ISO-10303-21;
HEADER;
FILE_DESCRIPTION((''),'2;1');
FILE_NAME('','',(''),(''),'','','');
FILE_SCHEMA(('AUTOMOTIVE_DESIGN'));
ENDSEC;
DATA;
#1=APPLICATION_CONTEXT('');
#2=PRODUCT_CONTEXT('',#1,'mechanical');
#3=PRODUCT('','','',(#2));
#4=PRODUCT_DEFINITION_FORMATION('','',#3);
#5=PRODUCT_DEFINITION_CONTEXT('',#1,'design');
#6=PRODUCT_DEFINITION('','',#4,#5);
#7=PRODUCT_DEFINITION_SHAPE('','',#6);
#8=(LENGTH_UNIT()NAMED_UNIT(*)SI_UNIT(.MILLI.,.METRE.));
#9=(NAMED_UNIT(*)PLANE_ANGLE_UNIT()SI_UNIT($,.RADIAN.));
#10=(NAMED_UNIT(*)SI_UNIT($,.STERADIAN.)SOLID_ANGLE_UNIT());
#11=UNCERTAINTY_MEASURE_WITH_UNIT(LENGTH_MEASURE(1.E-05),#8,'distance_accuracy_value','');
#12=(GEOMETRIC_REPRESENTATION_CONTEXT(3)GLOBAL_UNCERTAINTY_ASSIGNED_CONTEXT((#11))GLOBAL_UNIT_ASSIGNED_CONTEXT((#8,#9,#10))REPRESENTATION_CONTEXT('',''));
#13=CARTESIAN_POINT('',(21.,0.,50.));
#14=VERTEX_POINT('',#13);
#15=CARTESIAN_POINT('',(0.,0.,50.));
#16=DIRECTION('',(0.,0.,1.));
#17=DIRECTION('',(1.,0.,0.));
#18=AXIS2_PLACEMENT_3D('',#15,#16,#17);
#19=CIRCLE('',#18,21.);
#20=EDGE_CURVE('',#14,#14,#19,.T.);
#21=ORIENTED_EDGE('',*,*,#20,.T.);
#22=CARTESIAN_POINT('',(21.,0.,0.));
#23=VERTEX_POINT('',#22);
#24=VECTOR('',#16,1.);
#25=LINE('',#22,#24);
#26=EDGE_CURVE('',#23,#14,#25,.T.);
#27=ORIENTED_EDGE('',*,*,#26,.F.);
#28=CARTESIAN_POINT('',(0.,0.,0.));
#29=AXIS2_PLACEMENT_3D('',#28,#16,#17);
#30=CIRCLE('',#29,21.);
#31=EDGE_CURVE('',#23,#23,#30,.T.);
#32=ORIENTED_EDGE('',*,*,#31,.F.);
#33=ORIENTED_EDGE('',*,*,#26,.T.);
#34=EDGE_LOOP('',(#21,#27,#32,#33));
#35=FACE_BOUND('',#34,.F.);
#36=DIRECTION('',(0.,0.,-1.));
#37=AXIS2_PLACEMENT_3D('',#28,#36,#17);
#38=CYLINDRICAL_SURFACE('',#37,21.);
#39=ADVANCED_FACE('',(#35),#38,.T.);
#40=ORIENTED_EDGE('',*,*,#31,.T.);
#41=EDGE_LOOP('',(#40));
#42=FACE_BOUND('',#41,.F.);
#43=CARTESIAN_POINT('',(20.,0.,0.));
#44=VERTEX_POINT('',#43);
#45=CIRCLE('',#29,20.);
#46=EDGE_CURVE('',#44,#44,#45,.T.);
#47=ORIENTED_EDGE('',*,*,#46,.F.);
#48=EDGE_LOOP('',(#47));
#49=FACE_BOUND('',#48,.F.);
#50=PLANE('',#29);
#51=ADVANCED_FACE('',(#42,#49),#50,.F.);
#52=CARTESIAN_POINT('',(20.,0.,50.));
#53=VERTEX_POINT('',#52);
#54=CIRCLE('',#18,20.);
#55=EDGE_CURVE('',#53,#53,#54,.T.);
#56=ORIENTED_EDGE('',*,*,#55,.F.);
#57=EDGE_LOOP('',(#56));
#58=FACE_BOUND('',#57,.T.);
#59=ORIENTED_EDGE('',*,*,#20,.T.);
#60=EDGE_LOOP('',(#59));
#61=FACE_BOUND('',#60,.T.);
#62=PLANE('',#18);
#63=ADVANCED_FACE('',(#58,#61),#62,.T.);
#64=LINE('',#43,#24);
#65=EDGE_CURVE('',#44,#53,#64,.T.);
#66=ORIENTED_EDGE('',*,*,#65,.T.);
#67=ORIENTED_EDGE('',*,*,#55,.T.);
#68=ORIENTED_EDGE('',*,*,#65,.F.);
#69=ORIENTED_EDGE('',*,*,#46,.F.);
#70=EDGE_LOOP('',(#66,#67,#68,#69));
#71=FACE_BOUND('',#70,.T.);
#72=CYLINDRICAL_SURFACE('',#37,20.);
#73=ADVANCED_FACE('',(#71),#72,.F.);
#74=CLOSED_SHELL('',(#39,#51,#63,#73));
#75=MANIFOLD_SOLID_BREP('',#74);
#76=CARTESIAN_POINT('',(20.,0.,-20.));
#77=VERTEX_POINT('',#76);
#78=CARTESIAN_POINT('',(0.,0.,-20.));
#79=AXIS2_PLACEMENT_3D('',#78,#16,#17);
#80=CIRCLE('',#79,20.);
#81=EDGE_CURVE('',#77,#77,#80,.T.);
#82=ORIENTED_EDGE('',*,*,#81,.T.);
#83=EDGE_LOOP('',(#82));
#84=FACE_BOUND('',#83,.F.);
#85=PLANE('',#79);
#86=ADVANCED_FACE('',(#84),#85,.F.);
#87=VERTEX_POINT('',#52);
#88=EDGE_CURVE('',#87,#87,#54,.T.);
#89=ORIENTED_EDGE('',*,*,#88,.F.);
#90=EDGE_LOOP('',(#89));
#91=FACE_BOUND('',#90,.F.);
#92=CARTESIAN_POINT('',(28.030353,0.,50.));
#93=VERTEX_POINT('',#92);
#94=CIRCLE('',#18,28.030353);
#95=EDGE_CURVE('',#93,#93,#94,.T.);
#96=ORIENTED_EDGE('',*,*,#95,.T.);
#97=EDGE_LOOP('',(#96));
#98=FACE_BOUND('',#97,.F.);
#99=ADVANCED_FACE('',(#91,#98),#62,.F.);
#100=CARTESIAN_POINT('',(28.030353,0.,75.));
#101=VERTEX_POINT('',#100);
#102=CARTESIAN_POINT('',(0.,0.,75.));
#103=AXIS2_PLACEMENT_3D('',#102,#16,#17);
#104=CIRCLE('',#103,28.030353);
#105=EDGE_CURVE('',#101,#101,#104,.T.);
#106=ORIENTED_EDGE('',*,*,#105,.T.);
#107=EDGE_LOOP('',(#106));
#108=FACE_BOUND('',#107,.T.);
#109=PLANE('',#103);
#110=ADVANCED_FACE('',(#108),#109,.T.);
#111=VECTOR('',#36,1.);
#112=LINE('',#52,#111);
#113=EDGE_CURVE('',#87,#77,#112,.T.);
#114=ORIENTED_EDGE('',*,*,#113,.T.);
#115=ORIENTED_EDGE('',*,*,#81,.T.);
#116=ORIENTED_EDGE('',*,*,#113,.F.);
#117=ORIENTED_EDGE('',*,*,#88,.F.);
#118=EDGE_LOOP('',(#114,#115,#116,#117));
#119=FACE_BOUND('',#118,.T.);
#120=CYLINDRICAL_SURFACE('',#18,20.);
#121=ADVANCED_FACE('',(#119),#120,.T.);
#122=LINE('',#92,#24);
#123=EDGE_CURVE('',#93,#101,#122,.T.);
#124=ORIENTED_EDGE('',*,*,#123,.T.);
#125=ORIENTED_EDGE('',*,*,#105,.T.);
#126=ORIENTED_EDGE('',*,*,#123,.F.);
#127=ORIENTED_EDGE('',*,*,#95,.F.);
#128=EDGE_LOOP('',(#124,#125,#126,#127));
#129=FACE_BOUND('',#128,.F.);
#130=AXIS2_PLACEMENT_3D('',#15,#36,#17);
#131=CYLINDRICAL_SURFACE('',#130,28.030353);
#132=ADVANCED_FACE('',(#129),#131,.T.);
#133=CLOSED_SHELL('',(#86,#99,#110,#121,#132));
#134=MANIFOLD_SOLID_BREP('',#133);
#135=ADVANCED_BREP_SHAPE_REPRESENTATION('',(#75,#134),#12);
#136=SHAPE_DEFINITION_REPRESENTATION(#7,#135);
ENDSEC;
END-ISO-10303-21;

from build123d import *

# Parameters (mm, degrees)
F0_R     = 21
F0_R_2   = 20
F1_DEPTH = 50
F2_R     = 20
F3_DEPTH = 70
F2_R_2   = 28.0303533548
F2_R_3   = 21
F4_DEPTH = 25


with BuildPart() as f1:
    # F0 (on Top) → F1 (new body)
    with BuildSketch(Plane.XY):
        Circle(F0_R)
        Circle(F0_R_2, mode=Mode.SUBTRACT)
    extrude(amount=F1_DEPTH)


with BuildPart() as f3:
    # F2 (on face) → F3 (new body)
    with BuildSketch(Plane.XY.offset(50)):
        Circle(F2_R)
    extrude(amount=-F3_DEPTH)

    # F2 (on face) → F4 (join)
    with BuildSketch(Plane.XY.offset(50)):
        Circle(F2_R_2)
        Circle(F2_R_3, mode=Mode.SUBTRACT)
        Circle(F2_R_3)
        Circle(F2_R, mode=Mode.SUBTRACT)
        Circle(F2_R)
    extrude(amount=F4_DEPTH)


solid = Compound([f1.part, f3.part])
